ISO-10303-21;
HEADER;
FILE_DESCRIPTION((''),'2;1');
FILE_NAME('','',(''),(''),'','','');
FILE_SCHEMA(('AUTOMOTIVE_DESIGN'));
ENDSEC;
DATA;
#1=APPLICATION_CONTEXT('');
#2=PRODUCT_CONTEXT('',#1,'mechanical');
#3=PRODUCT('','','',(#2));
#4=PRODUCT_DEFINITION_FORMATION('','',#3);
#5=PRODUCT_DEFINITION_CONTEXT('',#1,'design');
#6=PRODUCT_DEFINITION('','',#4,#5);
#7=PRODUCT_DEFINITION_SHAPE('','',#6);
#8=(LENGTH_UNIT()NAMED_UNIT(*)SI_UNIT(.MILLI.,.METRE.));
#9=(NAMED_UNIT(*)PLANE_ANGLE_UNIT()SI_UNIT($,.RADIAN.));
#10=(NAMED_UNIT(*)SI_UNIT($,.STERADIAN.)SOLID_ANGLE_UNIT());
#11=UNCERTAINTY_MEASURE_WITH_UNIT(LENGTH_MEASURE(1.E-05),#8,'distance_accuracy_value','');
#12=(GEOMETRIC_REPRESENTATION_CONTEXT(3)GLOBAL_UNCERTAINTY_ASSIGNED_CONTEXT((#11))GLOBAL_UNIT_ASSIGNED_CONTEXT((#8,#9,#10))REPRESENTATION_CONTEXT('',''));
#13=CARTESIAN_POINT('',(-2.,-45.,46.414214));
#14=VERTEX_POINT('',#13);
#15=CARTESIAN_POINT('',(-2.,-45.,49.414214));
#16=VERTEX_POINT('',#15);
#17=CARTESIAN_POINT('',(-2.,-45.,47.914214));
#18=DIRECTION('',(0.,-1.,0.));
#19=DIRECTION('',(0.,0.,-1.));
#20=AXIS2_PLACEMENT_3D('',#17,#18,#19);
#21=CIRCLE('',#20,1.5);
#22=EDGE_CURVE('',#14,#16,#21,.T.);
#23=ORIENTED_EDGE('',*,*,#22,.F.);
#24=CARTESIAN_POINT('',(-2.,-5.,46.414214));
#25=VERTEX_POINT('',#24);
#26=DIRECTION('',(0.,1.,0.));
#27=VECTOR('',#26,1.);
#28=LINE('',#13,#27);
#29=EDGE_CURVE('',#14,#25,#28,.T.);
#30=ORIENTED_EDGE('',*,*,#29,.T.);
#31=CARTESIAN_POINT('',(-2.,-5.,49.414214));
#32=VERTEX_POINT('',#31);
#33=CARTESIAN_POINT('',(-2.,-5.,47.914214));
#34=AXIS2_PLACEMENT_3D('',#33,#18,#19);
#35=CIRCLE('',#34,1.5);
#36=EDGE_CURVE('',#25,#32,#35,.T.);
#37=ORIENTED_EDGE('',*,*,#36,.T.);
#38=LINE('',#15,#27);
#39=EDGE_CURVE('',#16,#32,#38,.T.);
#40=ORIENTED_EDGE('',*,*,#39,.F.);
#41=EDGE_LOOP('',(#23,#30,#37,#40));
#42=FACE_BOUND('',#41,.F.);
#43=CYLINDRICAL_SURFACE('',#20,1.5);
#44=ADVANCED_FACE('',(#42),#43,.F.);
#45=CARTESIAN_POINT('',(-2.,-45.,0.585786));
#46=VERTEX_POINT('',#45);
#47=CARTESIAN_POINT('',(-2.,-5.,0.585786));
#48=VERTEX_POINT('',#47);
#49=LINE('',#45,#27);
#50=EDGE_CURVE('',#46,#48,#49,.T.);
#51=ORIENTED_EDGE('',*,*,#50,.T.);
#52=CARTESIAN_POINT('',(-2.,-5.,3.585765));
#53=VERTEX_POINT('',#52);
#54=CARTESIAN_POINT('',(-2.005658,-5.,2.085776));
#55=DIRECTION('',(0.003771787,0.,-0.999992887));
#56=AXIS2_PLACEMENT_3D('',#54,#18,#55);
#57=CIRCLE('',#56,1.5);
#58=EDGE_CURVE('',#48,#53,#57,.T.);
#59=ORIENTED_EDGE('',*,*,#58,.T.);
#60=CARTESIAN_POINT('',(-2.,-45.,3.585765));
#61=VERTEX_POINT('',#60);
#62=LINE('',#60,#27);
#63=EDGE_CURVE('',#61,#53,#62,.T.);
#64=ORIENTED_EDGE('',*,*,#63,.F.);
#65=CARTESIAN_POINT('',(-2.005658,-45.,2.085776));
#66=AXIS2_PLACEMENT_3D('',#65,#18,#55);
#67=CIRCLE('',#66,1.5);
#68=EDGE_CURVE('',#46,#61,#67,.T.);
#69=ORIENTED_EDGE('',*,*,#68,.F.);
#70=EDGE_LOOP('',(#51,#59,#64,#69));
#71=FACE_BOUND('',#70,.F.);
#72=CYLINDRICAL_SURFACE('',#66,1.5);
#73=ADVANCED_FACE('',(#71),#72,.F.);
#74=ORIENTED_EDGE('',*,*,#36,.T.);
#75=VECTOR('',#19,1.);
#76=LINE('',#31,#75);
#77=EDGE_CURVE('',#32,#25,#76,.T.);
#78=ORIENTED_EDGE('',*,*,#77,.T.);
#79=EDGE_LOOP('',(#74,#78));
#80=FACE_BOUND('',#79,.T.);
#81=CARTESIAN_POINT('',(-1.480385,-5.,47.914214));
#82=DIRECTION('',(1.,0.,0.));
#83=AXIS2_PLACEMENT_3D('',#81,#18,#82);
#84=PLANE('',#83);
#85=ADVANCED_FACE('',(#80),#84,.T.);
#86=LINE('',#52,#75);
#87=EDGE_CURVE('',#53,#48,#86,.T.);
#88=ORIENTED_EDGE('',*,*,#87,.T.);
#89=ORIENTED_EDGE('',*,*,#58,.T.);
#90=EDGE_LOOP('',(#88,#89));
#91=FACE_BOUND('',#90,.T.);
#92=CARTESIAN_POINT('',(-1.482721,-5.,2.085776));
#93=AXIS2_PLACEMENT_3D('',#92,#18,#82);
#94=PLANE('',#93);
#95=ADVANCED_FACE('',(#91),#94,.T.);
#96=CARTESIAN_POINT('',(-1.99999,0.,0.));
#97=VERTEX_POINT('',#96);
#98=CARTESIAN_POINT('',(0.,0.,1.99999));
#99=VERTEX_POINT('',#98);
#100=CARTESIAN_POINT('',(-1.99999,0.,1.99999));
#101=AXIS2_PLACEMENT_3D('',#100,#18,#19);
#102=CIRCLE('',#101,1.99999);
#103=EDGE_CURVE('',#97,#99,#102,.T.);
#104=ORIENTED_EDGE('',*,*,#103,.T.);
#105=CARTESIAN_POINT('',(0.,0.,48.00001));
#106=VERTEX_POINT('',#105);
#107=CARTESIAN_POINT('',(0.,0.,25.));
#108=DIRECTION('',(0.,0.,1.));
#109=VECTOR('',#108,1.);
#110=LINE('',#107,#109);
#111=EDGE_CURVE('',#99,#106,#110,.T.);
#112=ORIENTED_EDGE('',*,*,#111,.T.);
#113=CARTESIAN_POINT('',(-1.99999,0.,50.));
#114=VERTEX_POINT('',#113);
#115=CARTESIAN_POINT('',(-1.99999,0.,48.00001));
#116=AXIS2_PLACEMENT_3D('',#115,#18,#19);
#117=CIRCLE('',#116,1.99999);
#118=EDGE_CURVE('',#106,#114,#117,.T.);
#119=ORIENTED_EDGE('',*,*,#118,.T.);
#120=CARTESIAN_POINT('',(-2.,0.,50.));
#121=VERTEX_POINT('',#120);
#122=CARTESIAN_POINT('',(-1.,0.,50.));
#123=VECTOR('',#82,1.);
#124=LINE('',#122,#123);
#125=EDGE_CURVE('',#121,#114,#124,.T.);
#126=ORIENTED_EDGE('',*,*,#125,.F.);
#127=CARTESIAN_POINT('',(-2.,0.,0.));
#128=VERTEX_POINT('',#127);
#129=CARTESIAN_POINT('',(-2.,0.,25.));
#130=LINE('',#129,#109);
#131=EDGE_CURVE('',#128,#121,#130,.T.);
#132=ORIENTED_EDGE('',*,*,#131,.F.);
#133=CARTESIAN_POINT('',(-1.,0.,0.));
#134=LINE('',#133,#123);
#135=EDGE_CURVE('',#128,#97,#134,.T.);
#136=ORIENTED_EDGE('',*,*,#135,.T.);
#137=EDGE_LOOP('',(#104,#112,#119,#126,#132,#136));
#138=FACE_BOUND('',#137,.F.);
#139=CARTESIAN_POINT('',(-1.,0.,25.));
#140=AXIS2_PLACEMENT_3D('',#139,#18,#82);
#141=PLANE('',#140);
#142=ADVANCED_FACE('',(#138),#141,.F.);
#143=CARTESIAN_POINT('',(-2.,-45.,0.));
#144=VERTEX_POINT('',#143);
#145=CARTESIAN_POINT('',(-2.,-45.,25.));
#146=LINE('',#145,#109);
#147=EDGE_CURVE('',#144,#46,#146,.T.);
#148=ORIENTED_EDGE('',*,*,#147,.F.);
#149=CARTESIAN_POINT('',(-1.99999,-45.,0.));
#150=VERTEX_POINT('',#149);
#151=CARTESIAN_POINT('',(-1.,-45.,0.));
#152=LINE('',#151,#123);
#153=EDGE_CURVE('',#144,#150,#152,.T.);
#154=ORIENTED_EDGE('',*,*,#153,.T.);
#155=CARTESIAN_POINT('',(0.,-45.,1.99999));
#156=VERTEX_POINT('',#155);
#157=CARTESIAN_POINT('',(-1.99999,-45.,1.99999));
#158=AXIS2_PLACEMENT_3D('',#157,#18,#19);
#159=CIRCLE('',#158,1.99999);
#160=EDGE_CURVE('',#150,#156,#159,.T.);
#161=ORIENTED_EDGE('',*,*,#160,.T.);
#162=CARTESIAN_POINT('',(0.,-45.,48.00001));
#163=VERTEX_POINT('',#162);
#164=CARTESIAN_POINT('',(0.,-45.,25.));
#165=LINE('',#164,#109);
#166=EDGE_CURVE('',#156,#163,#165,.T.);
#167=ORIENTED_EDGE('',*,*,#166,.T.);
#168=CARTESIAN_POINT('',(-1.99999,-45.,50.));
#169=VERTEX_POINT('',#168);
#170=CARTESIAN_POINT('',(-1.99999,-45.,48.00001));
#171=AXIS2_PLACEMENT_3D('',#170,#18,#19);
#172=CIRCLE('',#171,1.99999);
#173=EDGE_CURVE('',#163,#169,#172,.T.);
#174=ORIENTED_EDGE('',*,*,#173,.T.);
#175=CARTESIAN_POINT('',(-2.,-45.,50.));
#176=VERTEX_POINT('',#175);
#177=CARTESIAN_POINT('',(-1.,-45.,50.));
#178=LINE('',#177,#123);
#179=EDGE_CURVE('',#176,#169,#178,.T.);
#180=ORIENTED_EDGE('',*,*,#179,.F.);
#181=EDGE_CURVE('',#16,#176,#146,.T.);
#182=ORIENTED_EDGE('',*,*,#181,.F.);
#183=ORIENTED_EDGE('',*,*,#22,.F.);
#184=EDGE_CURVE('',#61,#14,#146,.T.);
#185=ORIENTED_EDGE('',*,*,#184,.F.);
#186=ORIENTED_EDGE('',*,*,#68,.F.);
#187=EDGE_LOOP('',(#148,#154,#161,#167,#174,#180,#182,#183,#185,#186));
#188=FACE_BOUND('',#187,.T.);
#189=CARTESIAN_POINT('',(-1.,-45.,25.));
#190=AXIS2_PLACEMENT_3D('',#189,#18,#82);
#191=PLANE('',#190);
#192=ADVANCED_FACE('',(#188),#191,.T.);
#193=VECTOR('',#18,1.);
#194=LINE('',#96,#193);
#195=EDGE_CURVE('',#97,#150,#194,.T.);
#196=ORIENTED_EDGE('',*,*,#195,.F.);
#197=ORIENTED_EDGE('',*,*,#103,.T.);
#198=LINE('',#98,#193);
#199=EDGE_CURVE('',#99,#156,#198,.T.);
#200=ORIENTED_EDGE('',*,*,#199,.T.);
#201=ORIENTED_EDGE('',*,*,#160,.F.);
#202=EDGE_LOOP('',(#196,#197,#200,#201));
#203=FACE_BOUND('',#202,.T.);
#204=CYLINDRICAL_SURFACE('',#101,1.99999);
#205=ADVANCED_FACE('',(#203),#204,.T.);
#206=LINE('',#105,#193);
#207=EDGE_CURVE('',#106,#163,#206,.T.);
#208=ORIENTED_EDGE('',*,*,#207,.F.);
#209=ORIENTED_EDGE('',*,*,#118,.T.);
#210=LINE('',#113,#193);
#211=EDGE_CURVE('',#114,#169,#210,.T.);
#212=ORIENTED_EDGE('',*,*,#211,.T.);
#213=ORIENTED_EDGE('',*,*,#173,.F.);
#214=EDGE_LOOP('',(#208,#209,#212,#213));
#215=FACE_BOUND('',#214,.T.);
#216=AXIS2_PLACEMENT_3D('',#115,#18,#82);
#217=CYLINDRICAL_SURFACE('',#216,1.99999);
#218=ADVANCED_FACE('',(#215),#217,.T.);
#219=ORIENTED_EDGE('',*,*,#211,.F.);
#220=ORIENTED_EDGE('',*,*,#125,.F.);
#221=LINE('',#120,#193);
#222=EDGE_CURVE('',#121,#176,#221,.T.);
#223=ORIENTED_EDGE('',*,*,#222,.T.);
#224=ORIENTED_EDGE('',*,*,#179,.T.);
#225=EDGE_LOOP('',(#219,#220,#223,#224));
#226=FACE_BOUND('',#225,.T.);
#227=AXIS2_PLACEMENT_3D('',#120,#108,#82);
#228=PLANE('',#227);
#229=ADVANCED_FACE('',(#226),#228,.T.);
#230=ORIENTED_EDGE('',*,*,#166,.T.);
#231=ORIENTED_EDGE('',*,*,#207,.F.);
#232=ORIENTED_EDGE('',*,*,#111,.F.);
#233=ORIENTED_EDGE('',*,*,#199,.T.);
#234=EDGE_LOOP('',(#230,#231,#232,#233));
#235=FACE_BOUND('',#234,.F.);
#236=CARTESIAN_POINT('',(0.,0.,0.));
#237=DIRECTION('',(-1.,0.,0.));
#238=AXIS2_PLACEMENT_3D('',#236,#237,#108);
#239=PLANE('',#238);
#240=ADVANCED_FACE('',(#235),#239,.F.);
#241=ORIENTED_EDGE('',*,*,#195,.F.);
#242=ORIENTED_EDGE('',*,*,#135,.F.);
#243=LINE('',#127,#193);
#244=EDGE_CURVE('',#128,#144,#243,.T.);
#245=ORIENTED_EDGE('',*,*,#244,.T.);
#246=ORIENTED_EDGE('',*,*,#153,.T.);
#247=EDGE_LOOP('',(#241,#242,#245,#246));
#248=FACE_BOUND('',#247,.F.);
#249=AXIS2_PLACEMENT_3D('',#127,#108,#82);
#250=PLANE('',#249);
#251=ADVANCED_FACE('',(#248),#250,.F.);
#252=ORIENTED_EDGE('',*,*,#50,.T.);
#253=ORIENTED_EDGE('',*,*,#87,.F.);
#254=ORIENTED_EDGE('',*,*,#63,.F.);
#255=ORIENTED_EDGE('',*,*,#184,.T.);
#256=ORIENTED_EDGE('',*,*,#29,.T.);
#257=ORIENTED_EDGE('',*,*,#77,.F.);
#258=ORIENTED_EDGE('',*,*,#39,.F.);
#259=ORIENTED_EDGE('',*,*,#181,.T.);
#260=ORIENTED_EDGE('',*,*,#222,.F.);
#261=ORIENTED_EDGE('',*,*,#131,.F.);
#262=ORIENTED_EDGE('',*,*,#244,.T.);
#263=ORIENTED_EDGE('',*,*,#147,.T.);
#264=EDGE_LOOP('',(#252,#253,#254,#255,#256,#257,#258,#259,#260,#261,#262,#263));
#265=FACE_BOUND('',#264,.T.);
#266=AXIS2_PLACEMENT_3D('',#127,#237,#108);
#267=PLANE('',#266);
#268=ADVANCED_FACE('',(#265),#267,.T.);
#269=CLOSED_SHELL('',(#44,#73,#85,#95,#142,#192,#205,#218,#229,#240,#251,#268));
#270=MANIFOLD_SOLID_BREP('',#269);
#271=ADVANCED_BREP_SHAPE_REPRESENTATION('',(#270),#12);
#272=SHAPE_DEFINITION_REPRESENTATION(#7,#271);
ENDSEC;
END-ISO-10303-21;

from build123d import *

# Parameters (mm, degrees)
F0_W     = 2
F0_H     = 50
F1_DEPTH = 45
F2_R     = 1.99999
F4_DEPTH = 40


# Not quite as in the source:
# - a fillet or chamfer is up to 0.001 mm smaller than in the source, because OpenCascade refuses the exact size


with BuildPart() as f1:
    # F0 (on Front) → F1 (new body)
    with BuildSketch(Plane.XZ):
        with Locations((-1, 25)):
            Rectangle(F0_W, F0_H)
    extrude(amount=F1_DEPTH)

    # F2 (radius 2 in the source; OpenCascade refuses exactly that, so slightly less here)
    f2_edges = [f1.edges().sort_by_distance(p)[0] for p in [
        (0, -22.5, 0),
        (0, -22.5, 50),
    ]]
    fillet(f2_edges, radius=F2_R)

    # F3 (on face) → F4 (cut)
    with BuildSketch(Plane.XZ.offset(45)):
        with BuildLine():
            Line((-2, 49.4142135624), (-2, 46.4142135624))
            ThreePointArc((-2, 46.4142135624), (-0.5, 47.9142135624), (-2, 49.4142135624))
        make_face()
        with BuildLine():
            ThreePointArc((-2, 0.5857864376), (-0.5056576806, 2.0857757678), (-2, 3.585765098))
            Line((-2, 3.585765098), (-2, 0.5857864376))
        make_face()
    extrude(amount=-F4_DEPTH, mode=Mode.SUBTRACT)


solid = f1.part
